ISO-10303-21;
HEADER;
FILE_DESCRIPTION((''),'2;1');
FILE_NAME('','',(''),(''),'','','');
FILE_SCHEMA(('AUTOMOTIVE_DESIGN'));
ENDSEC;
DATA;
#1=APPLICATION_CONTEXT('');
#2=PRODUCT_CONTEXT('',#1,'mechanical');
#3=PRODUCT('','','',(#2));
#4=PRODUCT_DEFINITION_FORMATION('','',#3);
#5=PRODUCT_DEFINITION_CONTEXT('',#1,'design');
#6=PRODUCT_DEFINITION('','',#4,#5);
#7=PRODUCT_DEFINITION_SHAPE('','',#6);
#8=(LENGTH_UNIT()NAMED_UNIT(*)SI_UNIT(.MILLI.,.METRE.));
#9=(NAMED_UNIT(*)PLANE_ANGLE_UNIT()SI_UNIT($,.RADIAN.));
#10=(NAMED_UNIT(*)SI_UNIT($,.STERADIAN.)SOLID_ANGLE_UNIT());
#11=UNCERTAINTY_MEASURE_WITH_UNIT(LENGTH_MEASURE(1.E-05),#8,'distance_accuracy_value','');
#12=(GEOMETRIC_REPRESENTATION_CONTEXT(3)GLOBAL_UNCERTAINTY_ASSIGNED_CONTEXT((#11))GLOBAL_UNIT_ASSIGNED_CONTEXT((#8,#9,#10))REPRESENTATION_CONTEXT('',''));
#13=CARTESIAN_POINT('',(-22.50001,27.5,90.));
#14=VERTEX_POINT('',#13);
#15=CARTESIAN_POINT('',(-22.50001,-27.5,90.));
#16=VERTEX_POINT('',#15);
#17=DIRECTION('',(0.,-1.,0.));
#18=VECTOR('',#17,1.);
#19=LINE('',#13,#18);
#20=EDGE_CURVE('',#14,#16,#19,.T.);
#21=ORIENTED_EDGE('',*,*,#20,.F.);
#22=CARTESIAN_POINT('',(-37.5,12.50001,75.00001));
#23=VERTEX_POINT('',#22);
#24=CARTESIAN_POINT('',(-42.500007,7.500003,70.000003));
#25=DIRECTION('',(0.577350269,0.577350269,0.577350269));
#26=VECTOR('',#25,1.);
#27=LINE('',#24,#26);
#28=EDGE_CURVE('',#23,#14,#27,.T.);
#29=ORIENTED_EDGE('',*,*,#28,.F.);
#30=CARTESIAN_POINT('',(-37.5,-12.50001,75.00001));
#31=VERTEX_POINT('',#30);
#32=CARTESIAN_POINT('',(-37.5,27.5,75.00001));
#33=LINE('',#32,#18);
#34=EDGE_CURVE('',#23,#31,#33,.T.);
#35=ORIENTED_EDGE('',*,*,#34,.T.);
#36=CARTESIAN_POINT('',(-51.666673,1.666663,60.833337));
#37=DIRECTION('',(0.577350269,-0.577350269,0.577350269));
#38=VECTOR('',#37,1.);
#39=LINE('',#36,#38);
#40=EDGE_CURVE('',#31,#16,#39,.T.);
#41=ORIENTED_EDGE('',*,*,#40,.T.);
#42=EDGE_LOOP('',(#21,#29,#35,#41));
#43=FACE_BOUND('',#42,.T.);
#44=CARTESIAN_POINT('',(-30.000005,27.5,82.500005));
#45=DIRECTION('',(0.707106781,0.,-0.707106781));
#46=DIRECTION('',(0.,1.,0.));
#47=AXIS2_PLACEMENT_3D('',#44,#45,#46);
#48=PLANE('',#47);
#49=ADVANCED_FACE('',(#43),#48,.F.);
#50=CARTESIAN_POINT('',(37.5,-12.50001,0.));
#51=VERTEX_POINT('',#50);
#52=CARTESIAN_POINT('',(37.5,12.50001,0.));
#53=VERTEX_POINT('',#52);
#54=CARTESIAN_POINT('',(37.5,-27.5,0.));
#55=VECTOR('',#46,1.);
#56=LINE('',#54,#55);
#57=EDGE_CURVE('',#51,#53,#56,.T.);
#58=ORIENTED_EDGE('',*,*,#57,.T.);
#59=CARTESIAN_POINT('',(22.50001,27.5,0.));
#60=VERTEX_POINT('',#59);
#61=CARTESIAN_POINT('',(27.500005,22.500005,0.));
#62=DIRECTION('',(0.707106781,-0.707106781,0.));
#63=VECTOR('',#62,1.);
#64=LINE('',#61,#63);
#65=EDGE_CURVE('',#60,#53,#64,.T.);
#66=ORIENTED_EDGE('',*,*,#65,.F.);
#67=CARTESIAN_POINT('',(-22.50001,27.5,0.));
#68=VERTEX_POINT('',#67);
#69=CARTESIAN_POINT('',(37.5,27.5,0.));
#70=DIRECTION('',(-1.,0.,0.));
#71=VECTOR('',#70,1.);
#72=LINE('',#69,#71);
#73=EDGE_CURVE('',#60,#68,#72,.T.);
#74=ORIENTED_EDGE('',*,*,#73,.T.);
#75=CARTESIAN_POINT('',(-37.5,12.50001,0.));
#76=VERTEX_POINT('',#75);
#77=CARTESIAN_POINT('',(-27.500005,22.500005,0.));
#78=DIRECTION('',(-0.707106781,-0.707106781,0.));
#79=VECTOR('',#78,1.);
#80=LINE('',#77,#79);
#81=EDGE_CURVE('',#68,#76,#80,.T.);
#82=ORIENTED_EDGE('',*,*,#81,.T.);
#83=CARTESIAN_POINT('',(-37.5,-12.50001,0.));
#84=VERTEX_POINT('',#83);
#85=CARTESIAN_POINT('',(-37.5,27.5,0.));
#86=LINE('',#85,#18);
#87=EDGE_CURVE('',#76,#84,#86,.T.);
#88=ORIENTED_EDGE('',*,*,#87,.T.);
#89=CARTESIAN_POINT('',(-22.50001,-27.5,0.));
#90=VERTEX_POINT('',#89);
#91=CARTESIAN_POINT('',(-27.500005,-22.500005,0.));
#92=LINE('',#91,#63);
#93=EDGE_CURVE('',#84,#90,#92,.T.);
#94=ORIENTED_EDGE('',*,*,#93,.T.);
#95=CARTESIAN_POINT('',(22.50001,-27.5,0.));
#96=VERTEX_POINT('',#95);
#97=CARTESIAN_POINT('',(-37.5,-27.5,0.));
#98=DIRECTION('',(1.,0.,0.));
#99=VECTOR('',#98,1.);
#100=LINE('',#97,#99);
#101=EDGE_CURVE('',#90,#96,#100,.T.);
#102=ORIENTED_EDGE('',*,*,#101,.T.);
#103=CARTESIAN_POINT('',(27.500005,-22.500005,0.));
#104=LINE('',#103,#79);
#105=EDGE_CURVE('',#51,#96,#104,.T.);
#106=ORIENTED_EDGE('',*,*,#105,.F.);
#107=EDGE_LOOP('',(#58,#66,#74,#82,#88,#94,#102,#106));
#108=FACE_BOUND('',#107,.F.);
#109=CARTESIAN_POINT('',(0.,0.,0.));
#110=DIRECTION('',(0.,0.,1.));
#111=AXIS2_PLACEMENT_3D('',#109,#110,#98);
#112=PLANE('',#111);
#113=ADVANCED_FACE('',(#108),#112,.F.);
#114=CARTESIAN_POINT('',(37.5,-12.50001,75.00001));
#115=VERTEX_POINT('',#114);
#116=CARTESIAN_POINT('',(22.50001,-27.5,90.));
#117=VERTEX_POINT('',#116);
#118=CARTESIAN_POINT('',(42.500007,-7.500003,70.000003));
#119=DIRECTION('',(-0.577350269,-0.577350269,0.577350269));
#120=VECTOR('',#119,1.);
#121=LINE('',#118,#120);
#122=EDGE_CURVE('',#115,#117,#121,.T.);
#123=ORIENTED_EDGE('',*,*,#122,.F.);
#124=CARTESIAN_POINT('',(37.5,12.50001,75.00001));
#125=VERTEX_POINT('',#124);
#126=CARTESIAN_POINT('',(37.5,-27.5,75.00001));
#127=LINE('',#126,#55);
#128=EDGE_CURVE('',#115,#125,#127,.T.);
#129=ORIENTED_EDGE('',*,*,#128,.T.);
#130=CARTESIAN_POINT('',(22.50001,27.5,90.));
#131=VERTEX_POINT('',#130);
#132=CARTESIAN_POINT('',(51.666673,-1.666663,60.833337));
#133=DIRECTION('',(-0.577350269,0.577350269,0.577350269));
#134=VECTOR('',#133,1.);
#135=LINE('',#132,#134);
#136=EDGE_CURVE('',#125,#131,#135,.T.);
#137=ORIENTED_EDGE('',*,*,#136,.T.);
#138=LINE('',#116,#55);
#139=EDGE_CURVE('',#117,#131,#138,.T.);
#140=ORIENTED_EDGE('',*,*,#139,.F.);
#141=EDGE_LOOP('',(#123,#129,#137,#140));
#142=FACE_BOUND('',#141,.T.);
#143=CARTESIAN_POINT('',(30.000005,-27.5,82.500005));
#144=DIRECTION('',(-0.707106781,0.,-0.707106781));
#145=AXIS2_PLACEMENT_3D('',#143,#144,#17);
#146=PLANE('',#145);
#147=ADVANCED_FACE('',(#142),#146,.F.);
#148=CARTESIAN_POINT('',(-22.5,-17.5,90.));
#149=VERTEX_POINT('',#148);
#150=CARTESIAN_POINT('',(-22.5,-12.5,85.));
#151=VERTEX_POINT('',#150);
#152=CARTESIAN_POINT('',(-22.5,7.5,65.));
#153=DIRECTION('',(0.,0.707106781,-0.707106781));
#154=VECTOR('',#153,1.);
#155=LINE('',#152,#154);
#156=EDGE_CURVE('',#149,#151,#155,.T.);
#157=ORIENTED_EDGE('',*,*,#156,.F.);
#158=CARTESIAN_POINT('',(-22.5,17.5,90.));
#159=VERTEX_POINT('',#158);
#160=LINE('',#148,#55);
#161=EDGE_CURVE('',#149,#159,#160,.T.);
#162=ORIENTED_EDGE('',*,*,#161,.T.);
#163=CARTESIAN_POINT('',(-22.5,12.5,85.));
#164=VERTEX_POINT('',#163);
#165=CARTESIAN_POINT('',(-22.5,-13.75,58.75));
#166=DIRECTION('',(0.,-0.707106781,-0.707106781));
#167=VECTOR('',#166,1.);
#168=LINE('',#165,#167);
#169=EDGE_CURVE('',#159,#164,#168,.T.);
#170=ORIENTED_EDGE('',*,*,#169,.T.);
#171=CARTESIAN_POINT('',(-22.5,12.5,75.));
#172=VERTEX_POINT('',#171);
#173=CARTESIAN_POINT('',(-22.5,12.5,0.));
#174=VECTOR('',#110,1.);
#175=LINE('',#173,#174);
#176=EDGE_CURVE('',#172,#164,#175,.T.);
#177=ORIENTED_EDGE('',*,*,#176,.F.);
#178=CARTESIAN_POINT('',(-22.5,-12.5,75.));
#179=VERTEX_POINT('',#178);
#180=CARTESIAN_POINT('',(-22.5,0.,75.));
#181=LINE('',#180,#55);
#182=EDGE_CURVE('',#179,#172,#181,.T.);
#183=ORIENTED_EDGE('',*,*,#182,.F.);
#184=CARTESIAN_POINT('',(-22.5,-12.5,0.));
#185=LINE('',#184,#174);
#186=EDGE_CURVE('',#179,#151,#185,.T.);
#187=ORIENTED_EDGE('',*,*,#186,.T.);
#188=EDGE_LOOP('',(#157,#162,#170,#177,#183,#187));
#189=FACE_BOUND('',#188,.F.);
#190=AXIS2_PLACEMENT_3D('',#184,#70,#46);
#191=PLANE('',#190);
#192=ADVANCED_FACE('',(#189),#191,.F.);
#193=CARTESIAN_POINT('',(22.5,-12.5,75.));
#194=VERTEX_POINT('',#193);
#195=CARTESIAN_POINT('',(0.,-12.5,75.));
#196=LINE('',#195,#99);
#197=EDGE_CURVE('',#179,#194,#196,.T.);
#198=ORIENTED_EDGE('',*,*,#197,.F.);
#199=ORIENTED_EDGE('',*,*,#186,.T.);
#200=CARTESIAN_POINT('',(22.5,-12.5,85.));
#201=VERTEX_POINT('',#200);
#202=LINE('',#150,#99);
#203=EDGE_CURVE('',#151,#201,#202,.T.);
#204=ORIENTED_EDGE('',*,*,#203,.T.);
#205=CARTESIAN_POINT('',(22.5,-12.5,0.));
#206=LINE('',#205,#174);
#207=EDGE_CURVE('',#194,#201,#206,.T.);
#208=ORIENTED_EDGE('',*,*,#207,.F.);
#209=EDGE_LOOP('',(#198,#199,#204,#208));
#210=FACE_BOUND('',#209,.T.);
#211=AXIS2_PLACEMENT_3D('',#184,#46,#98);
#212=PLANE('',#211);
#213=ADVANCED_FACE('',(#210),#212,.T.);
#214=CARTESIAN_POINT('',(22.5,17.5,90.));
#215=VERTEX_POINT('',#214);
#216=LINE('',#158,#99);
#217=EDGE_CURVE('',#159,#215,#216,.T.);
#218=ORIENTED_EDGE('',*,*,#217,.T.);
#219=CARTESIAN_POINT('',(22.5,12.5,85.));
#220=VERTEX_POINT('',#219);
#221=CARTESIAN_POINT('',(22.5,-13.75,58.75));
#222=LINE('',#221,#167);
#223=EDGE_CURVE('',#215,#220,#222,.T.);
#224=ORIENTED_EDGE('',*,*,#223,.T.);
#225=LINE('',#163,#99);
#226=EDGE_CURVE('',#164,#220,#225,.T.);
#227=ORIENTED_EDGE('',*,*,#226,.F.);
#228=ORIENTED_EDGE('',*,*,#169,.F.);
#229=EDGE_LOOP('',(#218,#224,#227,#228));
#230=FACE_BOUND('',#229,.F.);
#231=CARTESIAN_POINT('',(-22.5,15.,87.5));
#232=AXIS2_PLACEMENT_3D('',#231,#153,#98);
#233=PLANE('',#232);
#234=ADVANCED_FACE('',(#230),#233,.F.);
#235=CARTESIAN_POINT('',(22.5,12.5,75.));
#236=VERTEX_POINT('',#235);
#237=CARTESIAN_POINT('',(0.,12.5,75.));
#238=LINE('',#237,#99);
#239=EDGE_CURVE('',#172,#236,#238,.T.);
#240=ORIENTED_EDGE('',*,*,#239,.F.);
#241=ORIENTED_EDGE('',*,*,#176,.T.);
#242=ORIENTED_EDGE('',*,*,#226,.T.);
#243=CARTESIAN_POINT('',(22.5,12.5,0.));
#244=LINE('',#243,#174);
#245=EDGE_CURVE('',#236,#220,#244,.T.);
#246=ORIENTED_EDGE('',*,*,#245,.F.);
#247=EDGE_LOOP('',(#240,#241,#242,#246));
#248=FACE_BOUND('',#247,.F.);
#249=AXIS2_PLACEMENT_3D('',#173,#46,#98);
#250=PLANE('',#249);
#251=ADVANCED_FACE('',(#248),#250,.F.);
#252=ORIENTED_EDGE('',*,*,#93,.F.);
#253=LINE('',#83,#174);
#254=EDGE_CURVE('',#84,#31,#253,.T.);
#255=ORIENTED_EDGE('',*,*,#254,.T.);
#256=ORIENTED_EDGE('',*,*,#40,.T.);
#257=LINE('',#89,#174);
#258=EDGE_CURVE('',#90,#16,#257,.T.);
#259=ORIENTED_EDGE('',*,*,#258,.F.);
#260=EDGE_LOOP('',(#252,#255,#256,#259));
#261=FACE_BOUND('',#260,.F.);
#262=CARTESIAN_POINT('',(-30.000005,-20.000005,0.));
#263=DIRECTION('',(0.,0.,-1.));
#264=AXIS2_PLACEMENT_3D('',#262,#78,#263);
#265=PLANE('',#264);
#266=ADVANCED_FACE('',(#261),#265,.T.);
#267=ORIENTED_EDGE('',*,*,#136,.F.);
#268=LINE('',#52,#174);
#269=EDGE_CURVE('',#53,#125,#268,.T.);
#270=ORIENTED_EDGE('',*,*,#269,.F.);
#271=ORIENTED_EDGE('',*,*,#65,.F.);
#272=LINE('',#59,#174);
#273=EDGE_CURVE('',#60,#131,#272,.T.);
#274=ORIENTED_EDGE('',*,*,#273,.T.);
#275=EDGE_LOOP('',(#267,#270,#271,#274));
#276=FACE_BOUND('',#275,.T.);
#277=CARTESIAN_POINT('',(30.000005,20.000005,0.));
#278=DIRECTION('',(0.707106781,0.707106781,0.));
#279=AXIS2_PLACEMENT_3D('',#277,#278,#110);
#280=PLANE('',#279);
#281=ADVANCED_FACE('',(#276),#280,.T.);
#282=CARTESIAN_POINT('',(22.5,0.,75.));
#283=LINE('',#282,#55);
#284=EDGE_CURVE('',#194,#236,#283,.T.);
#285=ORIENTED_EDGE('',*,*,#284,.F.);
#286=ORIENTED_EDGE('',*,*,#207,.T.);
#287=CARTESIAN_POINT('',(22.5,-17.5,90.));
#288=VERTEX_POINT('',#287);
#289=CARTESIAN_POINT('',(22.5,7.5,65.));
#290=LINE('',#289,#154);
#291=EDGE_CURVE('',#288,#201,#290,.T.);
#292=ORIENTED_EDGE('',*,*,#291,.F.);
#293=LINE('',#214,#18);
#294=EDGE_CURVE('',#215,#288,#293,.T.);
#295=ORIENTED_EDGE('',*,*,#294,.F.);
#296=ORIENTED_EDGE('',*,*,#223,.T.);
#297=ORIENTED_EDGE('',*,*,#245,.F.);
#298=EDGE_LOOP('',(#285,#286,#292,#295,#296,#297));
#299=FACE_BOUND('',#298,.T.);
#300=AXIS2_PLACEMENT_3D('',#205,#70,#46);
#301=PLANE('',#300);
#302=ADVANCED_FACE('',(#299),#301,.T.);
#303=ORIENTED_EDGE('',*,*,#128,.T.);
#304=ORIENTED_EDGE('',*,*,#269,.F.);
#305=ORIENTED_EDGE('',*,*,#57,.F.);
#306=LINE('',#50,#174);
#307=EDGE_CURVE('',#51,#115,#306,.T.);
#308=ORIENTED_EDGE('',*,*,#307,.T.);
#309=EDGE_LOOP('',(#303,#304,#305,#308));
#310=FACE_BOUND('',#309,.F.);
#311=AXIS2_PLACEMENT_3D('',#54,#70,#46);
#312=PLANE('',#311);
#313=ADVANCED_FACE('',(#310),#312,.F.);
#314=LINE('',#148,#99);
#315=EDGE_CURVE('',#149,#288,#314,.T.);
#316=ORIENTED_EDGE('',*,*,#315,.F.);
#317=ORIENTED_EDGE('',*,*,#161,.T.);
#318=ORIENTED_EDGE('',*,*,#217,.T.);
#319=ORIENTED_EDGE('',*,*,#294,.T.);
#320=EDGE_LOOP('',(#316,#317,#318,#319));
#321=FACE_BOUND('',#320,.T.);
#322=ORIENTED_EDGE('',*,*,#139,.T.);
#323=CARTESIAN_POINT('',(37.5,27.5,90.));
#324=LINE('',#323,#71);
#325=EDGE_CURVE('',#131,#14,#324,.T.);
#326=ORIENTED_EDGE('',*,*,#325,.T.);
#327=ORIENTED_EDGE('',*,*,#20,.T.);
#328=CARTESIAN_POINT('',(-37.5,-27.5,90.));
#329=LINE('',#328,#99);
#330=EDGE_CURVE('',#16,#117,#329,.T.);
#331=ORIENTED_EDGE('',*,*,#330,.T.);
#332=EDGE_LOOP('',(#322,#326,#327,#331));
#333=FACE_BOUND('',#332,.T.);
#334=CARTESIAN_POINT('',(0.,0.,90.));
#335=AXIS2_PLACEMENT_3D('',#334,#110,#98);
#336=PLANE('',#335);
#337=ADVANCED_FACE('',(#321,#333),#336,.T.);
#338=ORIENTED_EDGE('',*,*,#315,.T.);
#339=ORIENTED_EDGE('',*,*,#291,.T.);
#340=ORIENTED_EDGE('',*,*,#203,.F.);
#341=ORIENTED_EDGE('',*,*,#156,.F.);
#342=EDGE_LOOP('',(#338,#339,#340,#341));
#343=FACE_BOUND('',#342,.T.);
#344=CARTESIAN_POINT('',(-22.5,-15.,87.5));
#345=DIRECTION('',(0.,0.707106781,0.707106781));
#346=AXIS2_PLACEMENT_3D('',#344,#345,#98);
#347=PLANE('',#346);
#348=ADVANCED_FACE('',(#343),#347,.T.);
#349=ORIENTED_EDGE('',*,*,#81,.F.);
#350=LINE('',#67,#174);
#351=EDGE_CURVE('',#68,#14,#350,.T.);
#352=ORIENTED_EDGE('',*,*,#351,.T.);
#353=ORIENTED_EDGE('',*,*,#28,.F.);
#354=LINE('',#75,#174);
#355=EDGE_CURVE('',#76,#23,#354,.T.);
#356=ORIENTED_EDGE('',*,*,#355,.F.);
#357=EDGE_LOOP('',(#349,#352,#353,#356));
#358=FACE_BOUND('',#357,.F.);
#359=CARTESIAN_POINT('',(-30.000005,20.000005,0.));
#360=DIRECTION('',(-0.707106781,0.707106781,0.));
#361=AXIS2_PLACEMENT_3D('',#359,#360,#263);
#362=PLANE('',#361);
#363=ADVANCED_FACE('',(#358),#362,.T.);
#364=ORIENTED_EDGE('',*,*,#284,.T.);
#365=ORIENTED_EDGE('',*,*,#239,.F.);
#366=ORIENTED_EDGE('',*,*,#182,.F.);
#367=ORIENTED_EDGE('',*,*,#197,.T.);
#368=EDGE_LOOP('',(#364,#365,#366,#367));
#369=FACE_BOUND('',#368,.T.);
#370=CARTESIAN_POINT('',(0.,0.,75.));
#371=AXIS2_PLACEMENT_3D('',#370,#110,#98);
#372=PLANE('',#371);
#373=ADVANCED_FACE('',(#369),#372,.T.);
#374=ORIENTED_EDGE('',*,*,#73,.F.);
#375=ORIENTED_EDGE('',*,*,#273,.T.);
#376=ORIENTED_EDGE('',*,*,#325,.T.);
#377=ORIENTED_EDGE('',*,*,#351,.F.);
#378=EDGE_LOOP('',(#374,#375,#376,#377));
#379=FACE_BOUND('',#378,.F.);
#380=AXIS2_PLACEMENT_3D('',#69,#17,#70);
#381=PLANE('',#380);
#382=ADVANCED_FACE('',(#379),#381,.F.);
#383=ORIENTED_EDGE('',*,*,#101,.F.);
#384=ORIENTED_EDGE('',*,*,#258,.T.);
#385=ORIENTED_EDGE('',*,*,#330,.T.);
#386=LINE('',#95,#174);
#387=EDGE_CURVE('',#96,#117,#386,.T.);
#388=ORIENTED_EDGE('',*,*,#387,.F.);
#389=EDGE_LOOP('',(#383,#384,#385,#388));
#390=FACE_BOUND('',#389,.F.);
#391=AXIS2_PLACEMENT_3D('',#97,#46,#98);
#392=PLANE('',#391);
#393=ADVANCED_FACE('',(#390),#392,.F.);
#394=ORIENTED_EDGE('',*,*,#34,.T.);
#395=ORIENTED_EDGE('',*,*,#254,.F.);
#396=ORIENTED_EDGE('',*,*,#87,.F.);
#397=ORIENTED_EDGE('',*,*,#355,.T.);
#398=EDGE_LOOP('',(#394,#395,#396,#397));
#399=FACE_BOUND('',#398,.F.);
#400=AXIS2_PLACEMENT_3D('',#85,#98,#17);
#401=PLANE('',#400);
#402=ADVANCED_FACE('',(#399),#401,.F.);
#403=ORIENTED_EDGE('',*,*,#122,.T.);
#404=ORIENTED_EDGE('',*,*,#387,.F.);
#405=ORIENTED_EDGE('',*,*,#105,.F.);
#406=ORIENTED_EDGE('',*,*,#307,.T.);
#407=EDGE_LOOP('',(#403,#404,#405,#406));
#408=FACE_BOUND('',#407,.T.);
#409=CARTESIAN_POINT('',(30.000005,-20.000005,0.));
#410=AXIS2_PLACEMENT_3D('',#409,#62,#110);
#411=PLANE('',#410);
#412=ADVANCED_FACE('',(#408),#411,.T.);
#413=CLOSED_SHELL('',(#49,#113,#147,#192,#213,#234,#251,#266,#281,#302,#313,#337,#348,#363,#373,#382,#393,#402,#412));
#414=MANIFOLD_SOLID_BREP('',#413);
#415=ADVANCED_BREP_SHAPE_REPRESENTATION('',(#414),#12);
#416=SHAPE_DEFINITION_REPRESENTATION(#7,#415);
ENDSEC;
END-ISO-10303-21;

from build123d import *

# Parameters (mm, degrees)
F0_W     = 45
F0_H     = 25
F1_DEPTH = 75
F2_DEPTH = 90
F3_SIZE  = 14.99999
F4_SIZE  = 5


# Not quite as in the source:
# - a fillet or chamfer is up to 0.001 mm smaller than in the source, because OpenCascade refuses the exact size


with BuildPart() as f1:
    # F0 (on Top) → F1 (new body)
    with BuildSketch(Plane.XY):
        Rectangle(F0_W, F0_H)
    extrude(amount=F1_DEPTH)

    # F0 (on Top) → F2 (join)
    with BuildSketch(Plane.XY):
        Polygon((37.5, 27.5), (-37.5, 27.5), (-37.5, -27.5), (-22.5, -27.5), (22.5, -27.5), (37.5, -27.5), align=None)
        Rectangle(F0_W, F0_H, mode=Mode.SUBTRACT)
    extrude(amount=F2_DEPTH)

    # F3 (size 15 in the source; OpenCascade refuses exactly that, so slightly less here)
    f3_edges = [f1.edges().sort_by_distance(p)[0] for p in [
        (-37.5, 0, 90),
        (37.5, 0, 90),
        (37.5, 27.5, 45),
        (37.5, -27.5, 45),
        (-37.5, -27.5, 45),
        (-37.5, 27.5, 45),
    ]]
    chamfer(f3_edges, length=F3_SIZE)

    # F4
    f4_edges = [f1.edges().sort_by_distance(p)[0] for p in [
        (0, 12.5, 90),
        (0, -12.5, 90),
    ]]
    chamfer(f4_edges, length=F4_SIZE)


solid = f1.part
